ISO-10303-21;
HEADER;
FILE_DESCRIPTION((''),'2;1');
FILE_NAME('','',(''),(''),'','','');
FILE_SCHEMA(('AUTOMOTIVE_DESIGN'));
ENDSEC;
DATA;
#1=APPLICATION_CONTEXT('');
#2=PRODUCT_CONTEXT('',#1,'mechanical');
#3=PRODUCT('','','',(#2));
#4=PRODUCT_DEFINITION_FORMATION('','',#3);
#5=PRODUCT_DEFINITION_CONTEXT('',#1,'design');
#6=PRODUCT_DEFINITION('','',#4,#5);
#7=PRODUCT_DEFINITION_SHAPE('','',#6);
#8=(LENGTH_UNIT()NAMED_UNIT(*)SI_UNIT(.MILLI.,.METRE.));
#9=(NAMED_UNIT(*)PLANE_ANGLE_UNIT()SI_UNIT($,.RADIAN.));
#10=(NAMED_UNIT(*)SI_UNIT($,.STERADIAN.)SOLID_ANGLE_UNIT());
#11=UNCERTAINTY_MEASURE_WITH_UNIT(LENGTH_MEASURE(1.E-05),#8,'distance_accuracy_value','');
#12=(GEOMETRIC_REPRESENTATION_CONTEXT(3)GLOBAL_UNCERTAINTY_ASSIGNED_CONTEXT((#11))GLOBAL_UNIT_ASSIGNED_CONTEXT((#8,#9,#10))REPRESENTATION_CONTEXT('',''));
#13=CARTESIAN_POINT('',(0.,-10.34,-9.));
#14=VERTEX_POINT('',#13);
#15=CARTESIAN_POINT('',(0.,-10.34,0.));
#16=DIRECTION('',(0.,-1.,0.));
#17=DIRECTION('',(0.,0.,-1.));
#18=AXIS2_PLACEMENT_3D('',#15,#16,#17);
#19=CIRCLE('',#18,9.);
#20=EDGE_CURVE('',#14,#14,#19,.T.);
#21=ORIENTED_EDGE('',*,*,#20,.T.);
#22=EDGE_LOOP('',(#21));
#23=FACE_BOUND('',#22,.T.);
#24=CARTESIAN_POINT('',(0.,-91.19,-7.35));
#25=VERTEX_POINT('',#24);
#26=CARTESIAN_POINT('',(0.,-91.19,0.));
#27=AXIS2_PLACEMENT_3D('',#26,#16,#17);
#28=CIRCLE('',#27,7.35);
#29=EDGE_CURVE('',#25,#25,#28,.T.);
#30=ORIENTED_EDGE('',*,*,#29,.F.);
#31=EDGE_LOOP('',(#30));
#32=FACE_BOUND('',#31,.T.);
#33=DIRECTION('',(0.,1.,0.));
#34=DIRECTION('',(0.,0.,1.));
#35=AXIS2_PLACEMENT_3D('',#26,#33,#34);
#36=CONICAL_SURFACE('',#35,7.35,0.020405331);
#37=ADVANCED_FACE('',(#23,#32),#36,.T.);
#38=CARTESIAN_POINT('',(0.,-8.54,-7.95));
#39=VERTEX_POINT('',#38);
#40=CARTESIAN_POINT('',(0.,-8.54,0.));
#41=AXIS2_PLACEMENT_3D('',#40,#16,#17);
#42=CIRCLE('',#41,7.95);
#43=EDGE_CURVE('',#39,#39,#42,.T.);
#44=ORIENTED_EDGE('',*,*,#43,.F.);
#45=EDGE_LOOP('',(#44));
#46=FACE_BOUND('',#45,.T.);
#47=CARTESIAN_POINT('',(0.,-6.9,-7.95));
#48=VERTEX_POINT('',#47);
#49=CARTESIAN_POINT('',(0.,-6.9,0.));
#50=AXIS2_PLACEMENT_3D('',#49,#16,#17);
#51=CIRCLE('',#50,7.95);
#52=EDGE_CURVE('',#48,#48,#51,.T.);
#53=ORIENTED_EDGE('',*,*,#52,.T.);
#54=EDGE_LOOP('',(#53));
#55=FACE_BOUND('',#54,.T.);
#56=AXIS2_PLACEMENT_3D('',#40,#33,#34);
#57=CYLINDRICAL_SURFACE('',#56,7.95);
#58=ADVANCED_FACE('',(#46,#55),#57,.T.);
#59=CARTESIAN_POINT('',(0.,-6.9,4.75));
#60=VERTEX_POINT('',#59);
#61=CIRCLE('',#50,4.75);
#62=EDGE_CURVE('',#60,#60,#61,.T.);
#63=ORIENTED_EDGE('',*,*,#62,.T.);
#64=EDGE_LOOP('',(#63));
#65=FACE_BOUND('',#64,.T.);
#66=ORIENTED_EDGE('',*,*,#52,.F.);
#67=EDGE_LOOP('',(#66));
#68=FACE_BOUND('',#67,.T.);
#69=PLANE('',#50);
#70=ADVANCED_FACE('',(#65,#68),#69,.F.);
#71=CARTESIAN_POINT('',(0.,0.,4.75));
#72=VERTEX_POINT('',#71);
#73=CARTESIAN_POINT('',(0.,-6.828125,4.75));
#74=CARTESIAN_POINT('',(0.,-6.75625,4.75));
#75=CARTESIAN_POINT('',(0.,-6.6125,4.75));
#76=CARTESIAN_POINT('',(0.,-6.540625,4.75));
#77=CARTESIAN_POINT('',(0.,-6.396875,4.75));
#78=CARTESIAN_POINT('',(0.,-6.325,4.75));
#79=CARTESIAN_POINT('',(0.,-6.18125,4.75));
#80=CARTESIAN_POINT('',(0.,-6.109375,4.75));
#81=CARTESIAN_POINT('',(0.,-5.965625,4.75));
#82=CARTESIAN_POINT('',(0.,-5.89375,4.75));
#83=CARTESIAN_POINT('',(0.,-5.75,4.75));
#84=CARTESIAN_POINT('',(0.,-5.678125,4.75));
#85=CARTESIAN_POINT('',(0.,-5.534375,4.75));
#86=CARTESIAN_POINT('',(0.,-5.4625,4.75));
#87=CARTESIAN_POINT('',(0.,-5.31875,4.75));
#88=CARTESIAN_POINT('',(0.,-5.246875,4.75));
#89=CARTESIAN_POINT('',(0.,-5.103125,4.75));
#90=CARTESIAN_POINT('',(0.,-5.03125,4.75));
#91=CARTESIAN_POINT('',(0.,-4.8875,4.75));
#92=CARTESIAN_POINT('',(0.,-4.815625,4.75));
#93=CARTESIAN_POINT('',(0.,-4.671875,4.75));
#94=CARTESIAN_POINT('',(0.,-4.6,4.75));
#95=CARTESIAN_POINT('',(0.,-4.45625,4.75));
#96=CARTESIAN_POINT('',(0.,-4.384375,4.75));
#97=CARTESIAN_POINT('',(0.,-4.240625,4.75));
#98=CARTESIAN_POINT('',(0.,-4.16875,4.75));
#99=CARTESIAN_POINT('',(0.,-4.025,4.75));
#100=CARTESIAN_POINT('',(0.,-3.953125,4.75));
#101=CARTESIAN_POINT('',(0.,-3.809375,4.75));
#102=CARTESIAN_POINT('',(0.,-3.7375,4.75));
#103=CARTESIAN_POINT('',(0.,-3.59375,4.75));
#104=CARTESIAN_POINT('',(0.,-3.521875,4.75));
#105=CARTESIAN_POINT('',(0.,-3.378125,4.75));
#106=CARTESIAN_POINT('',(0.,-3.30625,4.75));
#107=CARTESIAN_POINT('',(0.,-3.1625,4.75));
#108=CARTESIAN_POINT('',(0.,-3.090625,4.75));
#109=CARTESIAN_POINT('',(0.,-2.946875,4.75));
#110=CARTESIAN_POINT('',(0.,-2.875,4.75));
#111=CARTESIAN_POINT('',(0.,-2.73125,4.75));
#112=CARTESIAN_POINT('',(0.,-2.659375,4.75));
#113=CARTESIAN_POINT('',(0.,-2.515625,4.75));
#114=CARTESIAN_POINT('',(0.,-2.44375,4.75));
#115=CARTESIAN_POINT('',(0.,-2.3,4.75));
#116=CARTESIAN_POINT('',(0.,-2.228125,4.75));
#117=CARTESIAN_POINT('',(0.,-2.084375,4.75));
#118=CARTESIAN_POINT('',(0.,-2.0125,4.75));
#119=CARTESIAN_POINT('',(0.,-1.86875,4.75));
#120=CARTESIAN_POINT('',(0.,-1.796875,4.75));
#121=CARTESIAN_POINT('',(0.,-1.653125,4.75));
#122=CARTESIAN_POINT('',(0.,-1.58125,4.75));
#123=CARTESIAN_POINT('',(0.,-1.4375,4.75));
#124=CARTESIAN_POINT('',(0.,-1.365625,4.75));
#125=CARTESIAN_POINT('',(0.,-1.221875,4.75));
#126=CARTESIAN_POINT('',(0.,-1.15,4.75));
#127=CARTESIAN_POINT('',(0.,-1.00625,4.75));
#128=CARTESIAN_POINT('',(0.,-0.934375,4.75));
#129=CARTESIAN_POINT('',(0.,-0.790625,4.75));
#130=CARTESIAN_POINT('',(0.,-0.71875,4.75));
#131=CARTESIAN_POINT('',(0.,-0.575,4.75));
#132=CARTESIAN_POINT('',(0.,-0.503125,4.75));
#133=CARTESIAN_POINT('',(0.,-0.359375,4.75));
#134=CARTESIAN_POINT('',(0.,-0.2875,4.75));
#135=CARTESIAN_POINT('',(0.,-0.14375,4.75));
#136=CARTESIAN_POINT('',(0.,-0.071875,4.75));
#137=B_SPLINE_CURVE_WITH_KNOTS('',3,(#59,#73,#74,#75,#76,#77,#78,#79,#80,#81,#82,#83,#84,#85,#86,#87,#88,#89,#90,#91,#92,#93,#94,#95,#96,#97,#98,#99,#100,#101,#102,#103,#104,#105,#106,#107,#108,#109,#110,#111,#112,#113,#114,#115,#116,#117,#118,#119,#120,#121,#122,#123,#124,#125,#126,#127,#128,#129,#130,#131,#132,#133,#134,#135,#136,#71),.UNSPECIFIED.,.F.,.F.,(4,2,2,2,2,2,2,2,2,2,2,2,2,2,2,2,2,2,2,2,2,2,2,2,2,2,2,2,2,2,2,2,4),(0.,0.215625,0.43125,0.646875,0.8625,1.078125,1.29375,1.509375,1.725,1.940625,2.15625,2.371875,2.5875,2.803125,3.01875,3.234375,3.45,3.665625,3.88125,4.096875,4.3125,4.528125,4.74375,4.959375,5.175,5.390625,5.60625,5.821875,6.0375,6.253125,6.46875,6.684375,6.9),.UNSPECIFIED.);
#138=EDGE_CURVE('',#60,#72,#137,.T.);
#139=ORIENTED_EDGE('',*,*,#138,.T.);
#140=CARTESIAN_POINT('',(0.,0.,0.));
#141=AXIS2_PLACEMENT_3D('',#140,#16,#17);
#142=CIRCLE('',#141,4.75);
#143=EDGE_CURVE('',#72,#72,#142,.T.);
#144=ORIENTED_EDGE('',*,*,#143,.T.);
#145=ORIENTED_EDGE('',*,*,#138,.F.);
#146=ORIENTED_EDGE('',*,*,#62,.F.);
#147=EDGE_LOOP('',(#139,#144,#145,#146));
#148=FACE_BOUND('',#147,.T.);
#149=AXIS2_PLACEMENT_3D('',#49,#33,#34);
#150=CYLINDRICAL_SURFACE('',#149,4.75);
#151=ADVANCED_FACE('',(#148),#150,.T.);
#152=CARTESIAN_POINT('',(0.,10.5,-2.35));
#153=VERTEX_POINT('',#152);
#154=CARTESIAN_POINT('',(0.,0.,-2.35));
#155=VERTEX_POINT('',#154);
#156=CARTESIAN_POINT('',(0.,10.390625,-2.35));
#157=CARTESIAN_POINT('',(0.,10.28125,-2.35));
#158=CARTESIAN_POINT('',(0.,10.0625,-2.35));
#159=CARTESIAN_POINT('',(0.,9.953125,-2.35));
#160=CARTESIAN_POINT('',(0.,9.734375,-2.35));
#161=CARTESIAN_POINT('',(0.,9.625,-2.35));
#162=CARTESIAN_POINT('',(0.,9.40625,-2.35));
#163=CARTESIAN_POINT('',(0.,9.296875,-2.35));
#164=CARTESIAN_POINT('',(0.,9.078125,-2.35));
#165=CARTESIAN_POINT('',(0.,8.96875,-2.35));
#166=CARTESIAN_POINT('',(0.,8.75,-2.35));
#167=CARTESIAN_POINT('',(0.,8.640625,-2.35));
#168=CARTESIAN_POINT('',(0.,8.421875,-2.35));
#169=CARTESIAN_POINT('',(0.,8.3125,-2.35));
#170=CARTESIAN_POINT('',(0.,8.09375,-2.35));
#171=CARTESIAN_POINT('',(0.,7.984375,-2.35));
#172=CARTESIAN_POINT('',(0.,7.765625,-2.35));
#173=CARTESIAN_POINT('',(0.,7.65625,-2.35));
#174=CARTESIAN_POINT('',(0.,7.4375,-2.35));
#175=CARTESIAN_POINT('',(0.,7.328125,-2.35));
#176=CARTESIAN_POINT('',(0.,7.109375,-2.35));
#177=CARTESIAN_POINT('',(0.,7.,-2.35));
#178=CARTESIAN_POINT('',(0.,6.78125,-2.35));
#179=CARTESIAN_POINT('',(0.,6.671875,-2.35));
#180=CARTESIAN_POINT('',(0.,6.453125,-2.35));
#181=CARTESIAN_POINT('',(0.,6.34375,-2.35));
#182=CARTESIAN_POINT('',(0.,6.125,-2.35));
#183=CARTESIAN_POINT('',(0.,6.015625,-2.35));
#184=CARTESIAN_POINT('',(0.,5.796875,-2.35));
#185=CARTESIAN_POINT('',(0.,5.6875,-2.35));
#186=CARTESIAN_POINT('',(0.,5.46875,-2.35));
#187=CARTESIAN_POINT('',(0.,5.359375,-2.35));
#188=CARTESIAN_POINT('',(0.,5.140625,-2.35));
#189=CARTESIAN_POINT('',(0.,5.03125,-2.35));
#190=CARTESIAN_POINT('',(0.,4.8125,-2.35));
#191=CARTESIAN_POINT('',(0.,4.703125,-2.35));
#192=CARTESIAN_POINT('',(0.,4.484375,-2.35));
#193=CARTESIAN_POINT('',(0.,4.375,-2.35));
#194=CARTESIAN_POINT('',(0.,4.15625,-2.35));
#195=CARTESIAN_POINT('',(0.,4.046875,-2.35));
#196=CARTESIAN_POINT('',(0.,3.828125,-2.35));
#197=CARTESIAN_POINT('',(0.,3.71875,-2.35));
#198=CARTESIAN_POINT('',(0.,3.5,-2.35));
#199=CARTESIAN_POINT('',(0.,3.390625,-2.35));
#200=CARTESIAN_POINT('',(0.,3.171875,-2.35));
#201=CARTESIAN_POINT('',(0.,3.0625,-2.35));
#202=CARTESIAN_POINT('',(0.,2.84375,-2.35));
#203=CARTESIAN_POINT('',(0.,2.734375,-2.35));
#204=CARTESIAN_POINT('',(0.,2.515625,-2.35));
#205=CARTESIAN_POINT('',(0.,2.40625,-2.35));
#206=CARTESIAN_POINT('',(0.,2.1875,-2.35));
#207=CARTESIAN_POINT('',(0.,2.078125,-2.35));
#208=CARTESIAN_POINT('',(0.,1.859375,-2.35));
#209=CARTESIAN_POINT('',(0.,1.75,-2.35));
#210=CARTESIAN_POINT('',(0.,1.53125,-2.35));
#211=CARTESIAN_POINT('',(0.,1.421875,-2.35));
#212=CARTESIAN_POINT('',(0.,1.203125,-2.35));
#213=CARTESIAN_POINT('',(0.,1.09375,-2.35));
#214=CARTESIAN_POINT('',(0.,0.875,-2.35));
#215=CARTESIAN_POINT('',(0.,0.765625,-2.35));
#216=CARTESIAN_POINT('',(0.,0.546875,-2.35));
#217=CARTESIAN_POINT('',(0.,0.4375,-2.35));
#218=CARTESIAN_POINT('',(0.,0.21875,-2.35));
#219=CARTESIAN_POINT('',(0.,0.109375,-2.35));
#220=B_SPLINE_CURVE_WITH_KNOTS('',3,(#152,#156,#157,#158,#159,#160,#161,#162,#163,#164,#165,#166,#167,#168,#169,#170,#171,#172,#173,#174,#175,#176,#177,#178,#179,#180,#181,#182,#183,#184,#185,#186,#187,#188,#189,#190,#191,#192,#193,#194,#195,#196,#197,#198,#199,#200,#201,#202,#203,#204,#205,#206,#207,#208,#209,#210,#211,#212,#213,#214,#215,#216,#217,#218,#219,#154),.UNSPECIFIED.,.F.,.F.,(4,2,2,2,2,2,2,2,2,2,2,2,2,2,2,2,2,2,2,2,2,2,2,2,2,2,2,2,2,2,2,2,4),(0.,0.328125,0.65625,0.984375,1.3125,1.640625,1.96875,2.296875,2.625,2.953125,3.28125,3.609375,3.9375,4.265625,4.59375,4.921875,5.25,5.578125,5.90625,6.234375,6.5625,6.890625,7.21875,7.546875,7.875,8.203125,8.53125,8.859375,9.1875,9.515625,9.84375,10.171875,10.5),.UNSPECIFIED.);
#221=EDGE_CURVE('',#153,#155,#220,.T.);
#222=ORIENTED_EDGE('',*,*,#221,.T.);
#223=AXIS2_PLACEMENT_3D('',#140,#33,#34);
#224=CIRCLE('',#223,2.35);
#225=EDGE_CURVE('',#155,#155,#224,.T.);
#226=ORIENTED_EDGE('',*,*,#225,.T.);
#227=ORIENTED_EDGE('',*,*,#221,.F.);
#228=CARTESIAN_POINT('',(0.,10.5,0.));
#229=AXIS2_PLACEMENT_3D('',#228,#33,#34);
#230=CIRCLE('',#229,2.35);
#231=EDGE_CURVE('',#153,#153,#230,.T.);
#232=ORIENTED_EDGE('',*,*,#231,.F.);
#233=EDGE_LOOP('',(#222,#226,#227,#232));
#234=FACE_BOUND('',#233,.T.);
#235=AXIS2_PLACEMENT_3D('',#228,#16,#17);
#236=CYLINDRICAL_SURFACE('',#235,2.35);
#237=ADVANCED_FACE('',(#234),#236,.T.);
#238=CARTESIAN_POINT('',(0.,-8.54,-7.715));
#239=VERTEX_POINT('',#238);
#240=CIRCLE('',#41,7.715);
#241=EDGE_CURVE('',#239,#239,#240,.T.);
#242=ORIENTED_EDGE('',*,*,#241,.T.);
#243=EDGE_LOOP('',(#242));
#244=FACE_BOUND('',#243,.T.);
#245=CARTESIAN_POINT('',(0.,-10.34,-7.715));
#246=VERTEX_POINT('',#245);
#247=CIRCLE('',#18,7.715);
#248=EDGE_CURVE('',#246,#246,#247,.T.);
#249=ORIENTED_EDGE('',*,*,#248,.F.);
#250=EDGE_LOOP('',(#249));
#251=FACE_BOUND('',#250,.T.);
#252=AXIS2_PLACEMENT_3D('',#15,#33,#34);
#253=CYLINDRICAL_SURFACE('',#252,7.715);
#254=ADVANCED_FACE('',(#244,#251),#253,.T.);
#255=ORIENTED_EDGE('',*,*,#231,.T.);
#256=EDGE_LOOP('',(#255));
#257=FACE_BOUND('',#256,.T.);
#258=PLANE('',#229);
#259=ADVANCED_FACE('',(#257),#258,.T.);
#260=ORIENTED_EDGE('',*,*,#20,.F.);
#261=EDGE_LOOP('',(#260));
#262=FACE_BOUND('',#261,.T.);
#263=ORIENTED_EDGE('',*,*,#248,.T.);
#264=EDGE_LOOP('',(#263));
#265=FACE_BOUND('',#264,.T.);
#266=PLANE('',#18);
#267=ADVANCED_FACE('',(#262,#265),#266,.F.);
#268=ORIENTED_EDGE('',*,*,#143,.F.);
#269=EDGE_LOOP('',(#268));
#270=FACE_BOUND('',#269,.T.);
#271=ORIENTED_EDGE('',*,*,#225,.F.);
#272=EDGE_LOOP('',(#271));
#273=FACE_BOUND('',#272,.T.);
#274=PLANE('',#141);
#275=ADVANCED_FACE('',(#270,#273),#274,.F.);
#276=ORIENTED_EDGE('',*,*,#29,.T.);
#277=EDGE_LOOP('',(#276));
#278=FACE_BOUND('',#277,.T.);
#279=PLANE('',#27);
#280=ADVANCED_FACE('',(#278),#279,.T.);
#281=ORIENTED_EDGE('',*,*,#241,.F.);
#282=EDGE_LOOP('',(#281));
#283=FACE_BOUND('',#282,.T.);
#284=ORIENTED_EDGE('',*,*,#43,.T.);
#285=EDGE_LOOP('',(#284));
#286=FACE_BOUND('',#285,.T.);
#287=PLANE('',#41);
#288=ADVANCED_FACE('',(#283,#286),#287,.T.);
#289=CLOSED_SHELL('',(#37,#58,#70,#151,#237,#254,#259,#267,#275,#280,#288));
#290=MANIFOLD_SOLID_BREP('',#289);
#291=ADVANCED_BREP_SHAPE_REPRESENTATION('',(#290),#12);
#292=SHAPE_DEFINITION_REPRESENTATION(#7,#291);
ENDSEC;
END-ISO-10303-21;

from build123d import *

# Parameters (mm, degrees)
SKETCH1_R           = 2.35
BOSS_EXTRUDE1_DEPTH = 10.5
SKETCH2_R           = 4.75
BOSS_EXTRUDE2_DEPTH = 6.9
SKETCH3_R           = 7.95
BOSS_EXTRUDE3_DEPTH = 1.64
SKETCH4_R           = 7.715
BOSS_EXTRUDE4_DEPTH = 1.8


# Read off the part's stored shape, not the designer's step: Loft1
with BuildPart() as part:
    # Sketch1 → Boss-Extrude1 (new body)
    with BuildSketch(Plane(origin=(0, 0, 0), x_dir=(1, 0, 0), z_dir=(0, 1, 0))):
        with Locations(Location((0, 0, 0), (0, 0, 90))):
            Circle(SKETCH1_R)
    extrude(amount=BOSS_EXTRUDE1_DEPTH)

    # Sketch2 → Boss-Extrude2 (add)
    with BuildSketch(Plane.XZ):
        with Locations(Location((0, 0, 0), (0, 0, 90))):
            Circle(SKETCH2_R)
    extrude(amount=BOSS_EXTRUDE2_DEPTH)

    # Sketch3 → Boss-Extrude3 (add)
    with BuildSketch(Plane.XZ.offset(6.9)):
        with Locations(Location((0, 0, 0), (0, 0, 270))):
            Circle(SKETCH3_R)
    extrude(amount=BOSS_EXTRUDE3_DEPTH)

    # Sketch4 → Boss-Extrude4 (add)
    with BuildSketch(Plane.XZ.offset(8.54)):
        with Locations(Location((0, 0, 0), (0, 0, 270))):
            Circle(SKETCH4_R)
    extrude(amount=BOSS_EXTRUDE4_DEPTH)

    # Loft1 outline → Loft1 (revolve)
    with BuildSketch(Plane.XY):
        Polygon((0, -10.34), (0, -91.19), (7.35, -91.19), (9, -10.34), align=None)
    revolve(axis=Axis((0, 0, 0), (0, 1, 0)))


solid = part.part
